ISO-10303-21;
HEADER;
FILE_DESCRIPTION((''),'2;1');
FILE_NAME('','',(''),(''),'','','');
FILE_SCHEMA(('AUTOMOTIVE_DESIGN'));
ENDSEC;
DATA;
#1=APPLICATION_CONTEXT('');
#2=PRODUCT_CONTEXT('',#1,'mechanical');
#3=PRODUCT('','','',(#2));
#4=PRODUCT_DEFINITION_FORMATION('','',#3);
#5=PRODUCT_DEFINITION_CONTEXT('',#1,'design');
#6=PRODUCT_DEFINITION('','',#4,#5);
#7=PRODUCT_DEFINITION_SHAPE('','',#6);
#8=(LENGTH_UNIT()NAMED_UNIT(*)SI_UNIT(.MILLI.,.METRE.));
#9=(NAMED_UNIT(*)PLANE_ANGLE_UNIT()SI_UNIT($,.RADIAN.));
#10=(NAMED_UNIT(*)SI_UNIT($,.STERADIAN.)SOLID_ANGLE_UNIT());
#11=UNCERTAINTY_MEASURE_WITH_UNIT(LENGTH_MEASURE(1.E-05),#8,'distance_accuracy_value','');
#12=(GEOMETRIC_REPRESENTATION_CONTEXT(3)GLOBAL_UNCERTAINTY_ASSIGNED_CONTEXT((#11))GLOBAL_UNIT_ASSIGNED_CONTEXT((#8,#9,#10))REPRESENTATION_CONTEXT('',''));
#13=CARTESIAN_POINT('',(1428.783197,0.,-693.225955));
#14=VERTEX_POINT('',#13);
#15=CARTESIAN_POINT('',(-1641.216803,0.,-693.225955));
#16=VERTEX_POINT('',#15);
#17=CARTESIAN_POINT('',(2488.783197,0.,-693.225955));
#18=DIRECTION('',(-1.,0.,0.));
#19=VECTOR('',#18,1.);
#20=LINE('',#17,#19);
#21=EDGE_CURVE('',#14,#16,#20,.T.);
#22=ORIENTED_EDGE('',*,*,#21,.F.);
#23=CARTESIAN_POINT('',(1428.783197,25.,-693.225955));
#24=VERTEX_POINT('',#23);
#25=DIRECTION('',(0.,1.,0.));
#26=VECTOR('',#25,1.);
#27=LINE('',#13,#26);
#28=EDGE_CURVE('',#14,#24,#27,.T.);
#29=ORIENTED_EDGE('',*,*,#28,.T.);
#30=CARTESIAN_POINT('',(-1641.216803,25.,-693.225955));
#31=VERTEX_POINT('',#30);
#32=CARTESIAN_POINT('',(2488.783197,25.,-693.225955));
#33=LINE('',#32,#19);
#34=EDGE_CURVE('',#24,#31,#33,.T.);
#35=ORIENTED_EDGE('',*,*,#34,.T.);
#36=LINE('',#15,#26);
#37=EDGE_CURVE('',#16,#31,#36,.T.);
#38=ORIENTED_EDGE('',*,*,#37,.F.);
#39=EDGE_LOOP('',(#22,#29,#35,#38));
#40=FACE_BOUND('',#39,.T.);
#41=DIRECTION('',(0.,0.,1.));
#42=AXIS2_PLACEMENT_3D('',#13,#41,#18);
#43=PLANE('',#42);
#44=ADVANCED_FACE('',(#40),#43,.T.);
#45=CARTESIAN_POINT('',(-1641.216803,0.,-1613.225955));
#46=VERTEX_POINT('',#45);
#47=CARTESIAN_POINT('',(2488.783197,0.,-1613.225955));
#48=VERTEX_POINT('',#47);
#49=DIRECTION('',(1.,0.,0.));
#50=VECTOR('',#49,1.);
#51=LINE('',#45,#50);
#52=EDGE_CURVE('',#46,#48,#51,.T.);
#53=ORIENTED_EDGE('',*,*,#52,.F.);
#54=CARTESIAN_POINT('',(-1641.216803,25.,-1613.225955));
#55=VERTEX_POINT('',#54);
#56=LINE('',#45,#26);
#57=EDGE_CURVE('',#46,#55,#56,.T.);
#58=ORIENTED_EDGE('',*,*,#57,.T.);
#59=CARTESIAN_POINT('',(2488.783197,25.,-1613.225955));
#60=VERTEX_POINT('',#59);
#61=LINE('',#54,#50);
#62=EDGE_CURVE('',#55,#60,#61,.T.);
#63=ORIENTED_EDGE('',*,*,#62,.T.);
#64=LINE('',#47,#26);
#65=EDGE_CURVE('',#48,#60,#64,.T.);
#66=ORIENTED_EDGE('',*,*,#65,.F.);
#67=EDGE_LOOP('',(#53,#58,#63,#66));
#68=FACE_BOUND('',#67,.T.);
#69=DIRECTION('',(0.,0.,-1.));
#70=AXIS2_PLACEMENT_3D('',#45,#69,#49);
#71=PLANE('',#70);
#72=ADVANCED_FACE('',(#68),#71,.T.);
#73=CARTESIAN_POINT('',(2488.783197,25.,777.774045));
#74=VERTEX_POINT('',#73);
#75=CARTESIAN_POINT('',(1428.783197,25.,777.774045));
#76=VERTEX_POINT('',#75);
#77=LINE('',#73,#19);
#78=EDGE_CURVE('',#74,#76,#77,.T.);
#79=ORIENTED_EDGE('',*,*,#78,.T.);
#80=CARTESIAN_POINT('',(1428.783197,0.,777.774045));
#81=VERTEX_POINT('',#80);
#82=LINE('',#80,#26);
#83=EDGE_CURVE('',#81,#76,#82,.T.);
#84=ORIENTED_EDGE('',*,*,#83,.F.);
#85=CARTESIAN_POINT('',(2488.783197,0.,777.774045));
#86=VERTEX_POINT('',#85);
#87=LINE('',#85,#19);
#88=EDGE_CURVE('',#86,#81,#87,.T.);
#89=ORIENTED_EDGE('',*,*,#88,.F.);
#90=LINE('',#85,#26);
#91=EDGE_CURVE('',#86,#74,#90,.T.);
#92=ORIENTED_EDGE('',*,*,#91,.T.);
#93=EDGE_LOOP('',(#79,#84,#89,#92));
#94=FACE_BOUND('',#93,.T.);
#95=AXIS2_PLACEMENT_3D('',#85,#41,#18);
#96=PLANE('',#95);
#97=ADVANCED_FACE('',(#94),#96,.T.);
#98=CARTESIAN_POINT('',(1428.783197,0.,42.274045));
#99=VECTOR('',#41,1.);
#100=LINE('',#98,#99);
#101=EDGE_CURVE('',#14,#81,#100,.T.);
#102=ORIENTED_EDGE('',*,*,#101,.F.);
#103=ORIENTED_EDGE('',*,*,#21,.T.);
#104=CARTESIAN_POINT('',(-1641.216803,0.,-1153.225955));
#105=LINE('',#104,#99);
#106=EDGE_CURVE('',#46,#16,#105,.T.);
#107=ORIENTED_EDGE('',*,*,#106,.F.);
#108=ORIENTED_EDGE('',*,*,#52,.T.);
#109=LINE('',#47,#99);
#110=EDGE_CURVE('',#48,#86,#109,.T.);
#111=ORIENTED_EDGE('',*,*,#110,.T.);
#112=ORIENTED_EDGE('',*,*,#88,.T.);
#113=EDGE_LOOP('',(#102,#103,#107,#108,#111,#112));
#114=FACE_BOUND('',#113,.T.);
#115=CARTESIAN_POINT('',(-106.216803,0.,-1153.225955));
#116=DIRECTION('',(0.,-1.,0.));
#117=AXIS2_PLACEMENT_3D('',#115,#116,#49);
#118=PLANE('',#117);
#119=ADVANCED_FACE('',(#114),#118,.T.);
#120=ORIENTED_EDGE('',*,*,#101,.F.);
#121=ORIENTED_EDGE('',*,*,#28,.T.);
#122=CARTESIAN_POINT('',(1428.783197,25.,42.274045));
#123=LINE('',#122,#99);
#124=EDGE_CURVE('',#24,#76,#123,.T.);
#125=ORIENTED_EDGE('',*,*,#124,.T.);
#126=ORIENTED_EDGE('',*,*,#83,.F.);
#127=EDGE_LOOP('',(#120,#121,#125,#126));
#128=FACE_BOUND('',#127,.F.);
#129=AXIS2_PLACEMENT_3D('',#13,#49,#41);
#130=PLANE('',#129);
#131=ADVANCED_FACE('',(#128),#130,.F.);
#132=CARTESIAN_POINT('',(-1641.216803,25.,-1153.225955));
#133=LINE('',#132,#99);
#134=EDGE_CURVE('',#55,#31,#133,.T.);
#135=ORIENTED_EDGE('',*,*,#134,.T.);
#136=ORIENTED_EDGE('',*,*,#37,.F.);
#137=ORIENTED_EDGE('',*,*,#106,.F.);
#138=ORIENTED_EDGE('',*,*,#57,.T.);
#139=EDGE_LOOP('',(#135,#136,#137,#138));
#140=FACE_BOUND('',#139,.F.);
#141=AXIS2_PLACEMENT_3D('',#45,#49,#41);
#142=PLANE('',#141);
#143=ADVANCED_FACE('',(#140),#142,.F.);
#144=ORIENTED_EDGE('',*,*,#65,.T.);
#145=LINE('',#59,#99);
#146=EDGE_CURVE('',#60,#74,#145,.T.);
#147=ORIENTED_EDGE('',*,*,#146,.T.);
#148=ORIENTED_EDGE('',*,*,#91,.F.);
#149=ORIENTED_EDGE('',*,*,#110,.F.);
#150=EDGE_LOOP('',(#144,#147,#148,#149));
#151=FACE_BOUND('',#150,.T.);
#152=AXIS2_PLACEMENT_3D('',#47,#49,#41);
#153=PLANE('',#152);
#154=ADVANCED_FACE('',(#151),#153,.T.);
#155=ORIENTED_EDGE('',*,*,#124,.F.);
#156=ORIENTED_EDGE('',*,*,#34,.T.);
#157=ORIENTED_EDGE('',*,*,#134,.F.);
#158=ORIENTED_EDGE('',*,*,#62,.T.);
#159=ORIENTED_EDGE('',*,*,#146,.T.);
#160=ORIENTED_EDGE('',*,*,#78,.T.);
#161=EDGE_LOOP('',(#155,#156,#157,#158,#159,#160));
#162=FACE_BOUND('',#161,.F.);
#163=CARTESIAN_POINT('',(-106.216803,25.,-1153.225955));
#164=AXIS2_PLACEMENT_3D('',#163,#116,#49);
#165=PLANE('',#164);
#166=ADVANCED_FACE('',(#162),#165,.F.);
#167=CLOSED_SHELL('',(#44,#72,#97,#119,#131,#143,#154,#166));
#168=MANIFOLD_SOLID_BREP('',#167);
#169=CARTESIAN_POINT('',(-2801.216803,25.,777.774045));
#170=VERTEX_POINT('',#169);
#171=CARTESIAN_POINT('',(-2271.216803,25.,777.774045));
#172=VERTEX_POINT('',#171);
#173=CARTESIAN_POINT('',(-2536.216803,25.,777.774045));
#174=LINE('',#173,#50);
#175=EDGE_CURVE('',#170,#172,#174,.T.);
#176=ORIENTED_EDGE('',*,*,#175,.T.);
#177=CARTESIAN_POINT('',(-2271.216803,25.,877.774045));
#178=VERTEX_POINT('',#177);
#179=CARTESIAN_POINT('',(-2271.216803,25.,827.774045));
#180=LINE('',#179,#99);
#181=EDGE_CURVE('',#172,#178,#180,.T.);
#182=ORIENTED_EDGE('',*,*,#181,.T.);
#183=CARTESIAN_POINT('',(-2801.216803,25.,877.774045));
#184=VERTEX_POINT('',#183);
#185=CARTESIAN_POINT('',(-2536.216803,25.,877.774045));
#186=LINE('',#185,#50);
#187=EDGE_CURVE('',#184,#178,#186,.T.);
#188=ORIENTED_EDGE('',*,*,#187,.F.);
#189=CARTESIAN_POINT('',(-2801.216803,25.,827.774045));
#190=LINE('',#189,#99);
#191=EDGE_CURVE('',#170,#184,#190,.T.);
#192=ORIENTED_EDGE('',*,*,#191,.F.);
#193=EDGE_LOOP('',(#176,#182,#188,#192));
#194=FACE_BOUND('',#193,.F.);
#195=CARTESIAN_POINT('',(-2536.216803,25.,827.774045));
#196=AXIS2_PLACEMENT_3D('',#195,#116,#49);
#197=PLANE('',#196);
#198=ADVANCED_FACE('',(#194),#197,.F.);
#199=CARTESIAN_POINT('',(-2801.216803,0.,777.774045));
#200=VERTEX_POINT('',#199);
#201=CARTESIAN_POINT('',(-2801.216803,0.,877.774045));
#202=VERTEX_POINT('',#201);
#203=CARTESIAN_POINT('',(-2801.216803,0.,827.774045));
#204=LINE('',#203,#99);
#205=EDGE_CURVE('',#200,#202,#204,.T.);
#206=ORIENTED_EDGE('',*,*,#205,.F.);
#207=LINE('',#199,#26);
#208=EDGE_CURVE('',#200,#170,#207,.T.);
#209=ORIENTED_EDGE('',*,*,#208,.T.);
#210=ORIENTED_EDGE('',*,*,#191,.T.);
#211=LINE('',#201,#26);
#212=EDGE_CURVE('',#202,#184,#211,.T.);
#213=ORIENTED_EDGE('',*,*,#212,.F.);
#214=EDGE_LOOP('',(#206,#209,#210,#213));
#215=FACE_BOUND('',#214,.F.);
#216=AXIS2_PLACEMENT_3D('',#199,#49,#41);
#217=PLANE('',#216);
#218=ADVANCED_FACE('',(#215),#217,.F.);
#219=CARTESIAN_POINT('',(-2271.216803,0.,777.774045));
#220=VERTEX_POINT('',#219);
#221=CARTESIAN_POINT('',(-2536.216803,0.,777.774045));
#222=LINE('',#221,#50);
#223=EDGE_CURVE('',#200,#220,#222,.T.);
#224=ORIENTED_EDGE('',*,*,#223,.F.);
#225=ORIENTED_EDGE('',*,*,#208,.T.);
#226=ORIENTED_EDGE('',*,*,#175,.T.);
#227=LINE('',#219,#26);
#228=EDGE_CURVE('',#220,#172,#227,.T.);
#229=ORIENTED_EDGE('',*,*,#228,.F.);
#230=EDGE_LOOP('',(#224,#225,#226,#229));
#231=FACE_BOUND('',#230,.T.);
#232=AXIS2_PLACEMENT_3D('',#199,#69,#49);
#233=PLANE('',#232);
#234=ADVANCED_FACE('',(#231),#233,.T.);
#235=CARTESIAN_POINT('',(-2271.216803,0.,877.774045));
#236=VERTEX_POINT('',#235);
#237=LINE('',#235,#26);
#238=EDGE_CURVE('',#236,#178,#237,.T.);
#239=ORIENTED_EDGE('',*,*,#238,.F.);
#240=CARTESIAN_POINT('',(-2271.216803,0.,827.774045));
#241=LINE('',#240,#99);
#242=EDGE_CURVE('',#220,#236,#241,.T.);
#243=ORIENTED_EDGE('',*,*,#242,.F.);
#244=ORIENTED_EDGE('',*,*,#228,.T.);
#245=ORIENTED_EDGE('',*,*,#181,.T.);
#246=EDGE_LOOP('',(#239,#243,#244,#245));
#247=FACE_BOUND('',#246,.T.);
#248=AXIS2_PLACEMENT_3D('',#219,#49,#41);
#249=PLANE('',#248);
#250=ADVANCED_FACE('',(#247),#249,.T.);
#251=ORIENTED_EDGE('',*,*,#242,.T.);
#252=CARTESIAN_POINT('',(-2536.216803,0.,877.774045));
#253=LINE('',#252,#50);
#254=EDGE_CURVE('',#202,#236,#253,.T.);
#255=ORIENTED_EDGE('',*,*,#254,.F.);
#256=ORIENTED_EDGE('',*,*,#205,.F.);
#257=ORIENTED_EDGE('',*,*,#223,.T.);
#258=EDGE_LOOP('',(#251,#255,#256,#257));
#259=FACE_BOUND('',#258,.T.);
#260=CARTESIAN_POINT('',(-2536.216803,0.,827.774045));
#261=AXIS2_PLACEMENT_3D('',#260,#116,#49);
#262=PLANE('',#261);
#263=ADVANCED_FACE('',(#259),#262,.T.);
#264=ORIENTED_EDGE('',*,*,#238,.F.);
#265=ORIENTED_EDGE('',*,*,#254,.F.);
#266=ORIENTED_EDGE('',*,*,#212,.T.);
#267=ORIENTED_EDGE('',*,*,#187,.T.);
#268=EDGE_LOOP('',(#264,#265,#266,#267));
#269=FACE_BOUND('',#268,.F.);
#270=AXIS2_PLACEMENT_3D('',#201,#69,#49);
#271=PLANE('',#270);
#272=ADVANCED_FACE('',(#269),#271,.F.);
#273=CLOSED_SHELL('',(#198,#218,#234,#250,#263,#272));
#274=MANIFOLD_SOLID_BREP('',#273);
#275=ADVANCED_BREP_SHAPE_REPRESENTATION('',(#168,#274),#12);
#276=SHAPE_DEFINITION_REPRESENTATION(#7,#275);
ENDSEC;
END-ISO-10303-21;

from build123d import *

# Parameters (mm, degrees)
F0_W     = 530
F0_H     = 100
F1_DEPTH = 25
F0_W_2   = 3070
F0_H_2   = 920
F0_W_3   = 543.6974744081
F0_W_4   = 516.3025255919
F0_H_3   = 1471


with BuildPart() as f1:
    # F0 (on Front) → F1 (new body)
    with BuildSketch(Plane.XZ):
        with Locations((-2536.2168025541, 827.7740448676)):
            Rectangle(F0_W, F0_H)
    extrude(amount=-F1_DEPTH)


with BuildPart() as f1b:
    # F0 (on Front) → F1, piece 2 (new body)
    with BuildSketch(Plane.XZ):
        with Locations((-106.2168025541, -1153.2259551324)):
            Rectangle(F0_W_2, F0_H_2)
        with Locations((1700.63193465, -1153.2259551324)):
            Rectangle(F0_W_3, F0_H_2)
        with Locations((2230.63193465, -1153.2259551324)):
            Rectangle(F0_W_4, F0_H_2)
        with Locations((1700.63193465, 42.2740448676)):
            Rectangle(F0_W_3, F0_H_3)
        with Locations((2230.63193465, 42.2740448676)):
            Rectangle(F0_W_4, F0_H_3)
    extrude(amount=-F1_DEPTH)


solid = Compound([f1.part, f1b.part])
